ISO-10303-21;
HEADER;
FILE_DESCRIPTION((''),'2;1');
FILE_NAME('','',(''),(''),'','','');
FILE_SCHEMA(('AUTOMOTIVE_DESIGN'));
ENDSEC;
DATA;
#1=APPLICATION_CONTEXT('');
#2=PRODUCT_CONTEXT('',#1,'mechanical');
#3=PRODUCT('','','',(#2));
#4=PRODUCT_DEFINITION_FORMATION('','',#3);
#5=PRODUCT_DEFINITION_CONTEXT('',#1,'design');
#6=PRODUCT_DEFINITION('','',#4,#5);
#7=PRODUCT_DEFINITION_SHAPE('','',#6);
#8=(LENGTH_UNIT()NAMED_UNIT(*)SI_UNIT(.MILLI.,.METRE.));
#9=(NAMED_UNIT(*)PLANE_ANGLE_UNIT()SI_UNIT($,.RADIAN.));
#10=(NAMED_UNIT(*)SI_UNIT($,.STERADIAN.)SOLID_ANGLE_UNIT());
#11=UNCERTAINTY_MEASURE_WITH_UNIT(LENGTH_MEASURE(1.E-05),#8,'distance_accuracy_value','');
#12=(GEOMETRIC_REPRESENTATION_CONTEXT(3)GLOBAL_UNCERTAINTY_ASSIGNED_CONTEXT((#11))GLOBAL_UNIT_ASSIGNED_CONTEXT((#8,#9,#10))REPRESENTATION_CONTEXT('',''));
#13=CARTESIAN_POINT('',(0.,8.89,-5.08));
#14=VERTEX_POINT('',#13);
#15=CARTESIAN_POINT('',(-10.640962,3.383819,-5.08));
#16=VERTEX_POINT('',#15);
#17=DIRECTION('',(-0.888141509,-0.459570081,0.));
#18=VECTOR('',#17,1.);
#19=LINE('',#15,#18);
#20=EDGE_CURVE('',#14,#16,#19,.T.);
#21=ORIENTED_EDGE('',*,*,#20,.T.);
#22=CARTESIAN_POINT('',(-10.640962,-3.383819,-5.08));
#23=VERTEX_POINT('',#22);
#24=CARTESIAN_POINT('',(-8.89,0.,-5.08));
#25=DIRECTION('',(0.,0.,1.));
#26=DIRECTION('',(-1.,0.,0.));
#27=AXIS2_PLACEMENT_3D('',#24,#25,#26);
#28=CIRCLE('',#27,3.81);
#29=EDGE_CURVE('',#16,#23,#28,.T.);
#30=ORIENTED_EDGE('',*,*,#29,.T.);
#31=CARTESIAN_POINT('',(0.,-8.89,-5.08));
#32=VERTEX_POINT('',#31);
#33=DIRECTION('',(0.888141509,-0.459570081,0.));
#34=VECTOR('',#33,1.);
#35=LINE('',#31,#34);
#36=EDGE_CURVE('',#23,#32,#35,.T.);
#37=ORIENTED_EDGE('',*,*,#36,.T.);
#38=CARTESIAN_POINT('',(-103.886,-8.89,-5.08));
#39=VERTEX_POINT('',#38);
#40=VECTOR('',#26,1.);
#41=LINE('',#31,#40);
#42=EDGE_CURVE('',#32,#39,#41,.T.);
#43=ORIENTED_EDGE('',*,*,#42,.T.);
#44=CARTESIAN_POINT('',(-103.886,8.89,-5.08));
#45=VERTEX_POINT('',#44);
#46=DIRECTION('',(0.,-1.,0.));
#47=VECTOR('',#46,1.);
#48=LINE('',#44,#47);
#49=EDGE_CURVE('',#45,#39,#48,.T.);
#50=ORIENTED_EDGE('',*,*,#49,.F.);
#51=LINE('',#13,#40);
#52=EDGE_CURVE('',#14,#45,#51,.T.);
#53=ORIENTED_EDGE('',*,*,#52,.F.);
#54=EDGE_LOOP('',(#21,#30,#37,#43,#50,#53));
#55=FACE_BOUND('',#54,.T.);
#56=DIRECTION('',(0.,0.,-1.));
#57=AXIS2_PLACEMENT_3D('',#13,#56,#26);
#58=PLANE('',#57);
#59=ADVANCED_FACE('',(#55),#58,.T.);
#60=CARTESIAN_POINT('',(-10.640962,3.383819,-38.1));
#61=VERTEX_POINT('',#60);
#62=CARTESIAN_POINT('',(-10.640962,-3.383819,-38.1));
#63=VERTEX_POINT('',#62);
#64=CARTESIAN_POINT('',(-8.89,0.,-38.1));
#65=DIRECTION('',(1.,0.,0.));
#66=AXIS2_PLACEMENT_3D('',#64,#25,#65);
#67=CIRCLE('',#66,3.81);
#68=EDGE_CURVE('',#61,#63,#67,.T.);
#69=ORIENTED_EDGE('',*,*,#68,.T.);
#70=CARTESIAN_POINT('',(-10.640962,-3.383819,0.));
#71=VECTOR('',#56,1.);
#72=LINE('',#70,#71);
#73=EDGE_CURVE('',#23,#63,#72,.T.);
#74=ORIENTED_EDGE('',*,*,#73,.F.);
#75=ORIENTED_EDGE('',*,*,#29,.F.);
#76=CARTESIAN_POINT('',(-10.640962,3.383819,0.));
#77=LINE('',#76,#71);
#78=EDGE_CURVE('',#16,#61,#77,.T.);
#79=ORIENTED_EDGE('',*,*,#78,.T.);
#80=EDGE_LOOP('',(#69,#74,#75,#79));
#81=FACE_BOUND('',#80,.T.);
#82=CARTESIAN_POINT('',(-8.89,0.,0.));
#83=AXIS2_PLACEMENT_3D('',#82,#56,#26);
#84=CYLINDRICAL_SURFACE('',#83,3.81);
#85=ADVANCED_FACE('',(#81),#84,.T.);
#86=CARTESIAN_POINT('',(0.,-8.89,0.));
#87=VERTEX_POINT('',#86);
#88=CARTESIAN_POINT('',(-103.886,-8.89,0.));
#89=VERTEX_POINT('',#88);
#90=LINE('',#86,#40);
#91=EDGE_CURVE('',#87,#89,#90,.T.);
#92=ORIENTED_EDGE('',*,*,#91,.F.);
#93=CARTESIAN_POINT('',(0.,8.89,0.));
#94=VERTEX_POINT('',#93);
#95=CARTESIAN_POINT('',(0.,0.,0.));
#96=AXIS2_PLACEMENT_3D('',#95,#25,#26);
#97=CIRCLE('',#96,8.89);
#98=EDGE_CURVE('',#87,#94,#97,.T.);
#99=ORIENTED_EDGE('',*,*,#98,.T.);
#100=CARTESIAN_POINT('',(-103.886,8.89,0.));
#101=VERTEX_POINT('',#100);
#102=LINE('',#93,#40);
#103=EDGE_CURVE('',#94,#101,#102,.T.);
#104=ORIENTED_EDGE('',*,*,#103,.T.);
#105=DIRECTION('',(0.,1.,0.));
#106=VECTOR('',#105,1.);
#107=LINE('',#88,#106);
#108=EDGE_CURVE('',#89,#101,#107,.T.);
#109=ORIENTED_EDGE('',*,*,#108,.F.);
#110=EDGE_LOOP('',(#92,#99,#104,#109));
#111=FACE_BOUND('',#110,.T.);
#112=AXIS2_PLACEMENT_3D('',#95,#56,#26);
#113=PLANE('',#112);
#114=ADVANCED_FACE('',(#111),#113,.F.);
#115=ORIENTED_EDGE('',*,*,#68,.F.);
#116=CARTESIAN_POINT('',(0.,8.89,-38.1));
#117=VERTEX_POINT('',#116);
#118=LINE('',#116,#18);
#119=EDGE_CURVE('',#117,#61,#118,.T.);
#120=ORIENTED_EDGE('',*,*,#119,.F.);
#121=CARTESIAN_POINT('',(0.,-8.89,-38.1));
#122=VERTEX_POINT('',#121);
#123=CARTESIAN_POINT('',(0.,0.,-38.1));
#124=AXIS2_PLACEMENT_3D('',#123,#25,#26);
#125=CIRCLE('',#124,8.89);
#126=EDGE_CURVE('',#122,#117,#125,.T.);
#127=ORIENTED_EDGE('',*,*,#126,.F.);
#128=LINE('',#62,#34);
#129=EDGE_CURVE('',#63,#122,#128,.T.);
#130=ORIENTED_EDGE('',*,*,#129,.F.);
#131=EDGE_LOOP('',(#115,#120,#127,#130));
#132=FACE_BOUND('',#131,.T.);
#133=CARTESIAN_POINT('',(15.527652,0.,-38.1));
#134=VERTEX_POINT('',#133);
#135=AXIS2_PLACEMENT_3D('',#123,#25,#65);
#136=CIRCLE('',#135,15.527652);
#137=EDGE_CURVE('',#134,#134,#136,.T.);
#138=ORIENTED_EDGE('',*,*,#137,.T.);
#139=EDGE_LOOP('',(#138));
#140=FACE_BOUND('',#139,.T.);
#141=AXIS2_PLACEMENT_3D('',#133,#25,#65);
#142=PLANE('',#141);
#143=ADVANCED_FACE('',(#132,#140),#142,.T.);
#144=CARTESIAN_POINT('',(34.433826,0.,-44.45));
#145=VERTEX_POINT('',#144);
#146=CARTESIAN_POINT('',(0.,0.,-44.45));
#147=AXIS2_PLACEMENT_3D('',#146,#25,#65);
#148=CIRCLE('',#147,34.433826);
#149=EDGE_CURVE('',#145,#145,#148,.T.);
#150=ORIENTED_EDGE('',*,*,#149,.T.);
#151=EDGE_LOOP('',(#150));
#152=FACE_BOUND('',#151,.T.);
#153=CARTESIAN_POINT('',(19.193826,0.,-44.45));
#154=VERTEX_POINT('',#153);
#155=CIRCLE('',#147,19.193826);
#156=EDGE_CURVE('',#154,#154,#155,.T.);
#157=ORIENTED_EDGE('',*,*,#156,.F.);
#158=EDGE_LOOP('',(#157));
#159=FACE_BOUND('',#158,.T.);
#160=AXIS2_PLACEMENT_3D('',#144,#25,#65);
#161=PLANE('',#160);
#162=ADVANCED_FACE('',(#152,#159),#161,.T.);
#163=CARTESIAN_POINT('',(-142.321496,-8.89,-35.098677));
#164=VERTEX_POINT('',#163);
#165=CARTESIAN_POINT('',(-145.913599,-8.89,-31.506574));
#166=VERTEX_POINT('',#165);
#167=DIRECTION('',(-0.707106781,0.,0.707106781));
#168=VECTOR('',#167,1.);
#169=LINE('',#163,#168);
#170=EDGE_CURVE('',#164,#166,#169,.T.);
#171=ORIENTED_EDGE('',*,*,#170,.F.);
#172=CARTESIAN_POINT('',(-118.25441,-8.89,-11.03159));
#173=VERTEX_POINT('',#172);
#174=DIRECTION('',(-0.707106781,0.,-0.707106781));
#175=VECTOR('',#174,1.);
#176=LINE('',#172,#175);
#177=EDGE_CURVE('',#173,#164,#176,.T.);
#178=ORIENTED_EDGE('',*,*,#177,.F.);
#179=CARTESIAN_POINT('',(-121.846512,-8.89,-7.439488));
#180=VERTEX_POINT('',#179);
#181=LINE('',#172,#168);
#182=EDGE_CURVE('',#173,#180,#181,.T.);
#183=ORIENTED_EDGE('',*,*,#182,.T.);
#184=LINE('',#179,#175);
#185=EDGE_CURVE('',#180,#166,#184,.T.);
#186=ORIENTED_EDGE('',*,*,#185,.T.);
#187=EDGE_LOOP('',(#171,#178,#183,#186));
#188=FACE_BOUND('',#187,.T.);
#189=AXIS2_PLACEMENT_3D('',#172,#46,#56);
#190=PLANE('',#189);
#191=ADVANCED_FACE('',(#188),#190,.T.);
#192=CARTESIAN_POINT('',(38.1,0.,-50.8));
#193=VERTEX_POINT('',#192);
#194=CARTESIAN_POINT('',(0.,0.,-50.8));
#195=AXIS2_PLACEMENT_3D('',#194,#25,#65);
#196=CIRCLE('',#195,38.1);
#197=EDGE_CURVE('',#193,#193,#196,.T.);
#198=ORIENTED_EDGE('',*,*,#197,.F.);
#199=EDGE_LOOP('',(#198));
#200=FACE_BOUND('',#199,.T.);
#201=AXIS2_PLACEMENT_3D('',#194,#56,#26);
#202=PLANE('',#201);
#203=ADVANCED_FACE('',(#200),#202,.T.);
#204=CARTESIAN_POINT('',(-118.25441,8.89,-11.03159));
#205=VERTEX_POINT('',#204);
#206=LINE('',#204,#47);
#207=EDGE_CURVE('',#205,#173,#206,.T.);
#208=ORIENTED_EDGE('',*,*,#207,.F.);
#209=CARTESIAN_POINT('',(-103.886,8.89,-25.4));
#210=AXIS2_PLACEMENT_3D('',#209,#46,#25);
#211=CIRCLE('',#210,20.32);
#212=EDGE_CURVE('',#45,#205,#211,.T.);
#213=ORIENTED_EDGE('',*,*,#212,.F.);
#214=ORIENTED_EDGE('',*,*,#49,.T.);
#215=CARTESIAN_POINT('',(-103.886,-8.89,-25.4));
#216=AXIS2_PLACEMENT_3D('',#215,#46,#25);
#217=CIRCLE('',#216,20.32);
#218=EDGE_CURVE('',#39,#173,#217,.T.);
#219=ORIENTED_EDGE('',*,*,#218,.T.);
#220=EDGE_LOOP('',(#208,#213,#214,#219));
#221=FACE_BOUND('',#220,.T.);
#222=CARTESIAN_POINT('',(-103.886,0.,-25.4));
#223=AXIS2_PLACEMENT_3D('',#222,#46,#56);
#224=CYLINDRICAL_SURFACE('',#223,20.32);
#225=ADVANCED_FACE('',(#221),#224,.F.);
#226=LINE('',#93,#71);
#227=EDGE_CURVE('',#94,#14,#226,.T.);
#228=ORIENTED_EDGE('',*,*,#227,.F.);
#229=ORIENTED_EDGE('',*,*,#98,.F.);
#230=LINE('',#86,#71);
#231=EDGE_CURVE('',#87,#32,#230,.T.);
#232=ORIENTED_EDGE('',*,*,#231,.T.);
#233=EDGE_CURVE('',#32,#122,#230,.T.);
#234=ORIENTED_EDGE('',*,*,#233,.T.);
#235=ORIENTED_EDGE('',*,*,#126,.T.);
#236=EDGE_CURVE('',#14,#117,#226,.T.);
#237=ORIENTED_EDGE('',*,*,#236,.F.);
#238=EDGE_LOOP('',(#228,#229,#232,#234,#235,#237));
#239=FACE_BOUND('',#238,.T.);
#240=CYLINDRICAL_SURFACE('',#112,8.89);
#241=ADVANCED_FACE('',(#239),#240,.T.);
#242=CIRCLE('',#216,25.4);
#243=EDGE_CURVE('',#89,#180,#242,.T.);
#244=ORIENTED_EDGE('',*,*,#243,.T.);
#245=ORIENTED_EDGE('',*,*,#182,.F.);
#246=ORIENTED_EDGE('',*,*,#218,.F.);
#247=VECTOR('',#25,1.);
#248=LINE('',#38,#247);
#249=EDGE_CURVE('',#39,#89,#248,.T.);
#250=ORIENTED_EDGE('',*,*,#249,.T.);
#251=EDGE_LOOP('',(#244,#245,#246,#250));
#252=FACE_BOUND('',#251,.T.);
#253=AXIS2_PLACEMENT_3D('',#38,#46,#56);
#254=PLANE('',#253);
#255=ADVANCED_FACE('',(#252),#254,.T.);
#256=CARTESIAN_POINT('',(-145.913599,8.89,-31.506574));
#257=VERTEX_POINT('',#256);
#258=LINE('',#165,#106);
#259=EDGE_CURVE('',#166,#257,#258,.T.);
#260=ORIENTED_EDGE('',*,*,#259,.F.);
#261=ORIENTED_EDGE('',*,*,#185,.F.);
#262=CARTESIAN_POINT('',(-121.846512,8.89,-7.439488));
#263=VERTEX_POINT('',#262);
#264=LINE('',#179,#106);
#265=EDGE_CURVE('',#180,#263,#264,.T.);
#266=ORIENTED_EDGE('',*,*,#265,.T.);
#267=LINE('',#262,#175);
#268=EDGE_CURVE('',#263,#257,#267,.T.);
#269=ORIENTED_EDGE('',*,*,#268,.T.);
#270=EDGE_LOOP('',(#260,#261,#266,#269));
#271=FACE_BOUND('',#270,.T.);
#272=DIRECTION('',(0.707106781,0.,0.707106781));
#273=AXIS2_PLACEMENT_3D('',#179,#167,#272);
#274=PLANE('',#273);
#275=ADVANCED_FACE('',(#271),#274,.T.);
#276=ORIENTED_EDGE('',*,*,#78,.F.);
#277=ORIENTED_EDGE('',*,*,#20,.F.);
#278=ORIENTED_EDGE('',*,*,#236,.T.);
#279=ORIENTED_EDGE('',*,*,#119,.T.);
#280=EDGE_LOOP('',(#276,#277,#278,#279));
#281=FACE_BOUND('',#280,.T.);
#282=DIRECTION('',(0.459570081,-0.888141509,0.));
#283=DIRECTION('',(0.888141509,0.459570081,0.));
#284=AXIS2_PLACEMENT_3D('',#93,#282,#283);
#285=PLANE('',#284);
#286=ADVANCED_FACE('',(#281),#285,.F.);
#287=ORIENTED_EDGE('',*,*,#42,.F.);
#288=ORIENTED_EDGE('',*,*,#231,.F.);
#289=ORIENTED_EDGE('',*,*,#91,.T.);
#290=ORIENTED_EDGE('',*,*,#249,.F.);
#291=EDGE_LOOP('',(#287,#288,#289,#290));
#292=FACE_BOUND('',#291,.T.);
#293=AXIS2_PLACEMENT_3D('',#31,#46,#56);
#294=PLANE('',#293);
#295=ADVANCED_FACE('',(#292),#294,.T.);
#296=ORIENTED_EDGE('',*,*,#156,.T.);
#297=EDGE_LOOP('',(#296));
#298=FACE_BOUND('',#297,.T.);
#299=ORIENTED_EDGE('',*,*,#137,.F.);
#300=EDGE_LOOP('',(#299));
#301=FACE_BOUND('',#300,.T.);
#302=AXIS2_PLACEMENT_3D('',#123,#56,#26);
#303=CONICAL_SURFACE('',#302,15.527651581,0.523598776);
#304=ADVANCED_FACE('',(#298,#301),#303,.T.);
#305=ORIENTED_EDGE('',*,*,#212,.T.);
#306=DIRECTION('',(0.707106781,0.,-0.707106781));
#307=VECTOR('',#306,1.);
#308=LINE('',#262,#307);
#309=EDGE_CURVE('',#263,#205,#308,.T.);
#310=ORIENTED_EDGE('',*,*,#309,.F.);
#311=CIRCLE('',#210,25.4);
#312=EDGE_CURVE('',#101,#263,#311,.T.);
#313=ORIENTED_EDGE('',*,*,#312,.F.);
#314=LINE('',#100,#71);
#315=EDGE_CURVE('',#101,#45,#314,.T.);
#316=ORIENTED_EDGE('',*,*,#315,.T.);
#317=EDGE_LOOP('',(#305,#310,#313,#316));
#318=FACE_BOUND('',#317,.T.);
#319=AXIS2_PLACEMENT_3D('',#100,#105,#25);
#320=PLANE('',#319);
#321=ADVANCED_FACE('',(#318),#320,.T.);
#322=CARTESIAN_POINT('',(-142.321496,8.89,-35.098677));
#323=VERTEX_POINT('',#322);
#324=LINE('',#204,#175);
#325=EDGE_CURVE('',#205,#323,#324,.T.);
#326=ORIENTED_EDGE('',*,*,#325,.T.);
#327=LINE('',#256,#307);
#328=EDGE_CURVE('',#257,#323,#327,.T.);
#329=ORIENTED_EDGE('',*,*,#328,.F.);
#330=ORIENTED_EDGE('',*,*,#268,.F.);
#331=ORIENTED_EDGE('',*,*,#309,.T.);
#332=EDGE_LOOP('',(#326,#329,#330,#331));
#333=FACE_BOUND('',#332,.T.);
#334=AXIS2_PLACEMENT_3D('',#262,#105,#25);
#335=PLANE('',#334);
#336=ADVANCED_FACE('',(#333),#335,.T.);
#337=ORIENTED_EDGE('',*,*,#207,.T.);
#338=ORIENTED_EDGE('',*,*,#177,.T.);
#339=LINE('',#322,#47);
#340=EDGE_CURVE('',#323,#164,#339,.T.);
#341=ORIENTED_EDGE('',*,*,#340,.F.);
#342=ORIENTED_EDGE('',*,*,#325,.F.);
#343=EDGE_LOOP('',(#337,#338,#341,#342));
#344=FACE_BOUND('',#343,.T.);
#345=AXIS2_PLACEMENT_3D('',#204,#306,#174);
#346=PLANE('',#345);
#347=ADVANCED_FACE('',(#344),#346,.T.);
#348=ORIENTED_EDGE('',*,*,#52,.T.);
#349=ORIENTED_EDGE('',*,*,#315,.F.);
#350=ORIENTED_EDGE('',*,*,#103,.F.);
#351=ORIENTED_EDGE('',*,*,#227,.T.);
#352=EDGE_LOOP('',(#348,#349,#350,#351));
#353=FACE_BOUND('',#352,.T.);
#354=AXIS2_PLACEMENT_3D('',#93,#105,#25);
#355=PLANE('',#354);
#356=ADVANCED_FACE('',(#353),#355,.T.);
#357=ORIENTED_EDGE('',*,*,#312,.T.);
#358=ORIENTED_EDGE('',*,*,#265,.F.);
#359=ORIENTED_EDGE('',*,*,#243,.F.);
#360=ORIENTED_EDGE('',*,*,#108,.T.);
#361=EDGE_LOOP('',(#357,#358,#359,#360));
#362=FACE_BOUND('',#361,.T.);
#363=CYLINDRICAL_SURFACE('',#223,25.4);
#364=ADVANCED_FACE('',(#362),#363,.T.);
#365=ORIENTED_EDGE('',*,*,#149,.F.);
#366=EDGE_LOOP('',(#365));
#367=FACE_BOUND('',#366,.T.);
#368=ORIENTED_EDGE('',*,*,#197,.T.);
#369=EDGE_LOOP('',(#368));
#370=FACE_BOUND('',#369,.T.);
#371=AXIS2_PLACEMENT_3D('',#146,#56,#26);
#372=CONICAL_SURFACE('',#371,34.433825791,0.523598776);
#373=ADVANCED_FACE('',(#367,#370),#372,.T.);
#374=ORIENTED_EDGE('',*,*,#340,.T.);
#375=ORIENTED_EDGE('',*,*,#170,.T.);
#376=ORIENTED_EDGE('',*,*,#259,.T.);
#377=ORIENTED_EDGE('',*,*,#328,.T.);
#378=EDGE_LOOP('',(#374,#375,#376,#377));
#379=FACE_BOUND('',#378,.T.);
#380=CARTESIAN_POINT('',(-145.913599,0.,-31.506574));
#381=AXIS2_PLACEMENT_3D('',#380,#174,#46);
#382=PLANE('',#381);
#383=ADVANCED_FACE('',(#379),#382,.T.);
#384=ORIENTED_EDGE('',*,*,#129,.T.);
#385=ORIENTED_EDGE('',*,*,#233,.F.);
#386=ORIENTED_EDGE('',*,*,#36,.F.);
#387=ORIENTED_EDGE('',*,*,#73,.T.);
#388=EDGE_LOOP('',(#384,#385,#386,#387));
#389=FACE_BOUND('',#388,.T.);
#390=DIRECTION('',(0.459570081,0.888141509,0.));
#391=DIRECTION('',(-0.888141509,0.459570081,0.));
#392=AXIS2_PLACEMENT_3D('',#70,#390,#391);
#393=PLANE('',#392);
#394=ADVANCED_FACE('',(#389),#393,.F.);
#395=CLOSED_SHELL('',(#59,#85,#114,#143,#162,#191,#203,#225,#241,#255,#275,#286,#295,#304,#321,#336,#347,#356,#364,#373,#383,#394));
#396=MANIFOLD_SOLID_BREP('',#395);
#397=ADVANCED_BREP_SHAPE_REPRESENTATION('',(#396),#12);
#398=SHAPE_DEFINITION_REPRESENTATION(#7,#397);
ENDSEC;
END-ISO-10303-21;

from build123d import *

# Parameters (mm, degrees)
BOSS_EXTRUDE1_DEPTH = 38.1
CUT_EXTRUDE1_START  = -5.08
CUT_EXTRUDE1_DEPTH  = 5.08
SWEEP1_START        = -8.89
SWEEP1_DEPTH        = 17.78


# Read off the part's stored shape, not the designer's step: Sweep1
with BuildPart() as part:
    # Sketch2 → Revolve1 (revolve)
    with BuildSketch(Plane(origin=(0, 0, 0), x_dir=(1, 0, 0), z_dir=(0, 1, 0))):
        Polygon((0, 50.8), (38.1, 50.8), (34.433825791, 44.45), (19.193825791, 44.45), (15.527651581, 38.1), (0, 38.1), align=None)
    revolve(axis=Axis((0, 0, 0), (0, 0, -1)))

    # Sketch3 → Boss-Extrude1 (add)
    with BuildSketch(Plane.XY.offset(-38.1)):
        with BuildLine():
            Line((0, 8.89), (-10.640962008, 3.383819151))
            ThreePointArc((-10.640962008, 3.383819151), (-12.7, 0), (-10.640962008, -3.383819151))
            Line((-10.640962008, -3.383819151), (0, -8.89))
            ThreePointArc((0, -8.89), (8.89, 0), (0, 8.89))
        make_face()
    extrude(amount=BOSS_EXTRUDE1_DEPTH)

    # Sketch4 → Cut-Extrude1 (cut)
    with BuildSketch(Plane.XY.offset(CUT_EXTRUDE1_START)):
        with BuildLine():
            Line((0, 8.89), (0, -8.89))
            Line((0, -8.89), (-10.640962008, -3.383819151))
            ThreePointArc((-10.640962008, -3.383819151), (-12.7, 0), (-10.640962008, 3.383819151))
            Line((-10.640962008, 3.383819151), (0, 8.89))
        make_face()
    extrude(amount=CUT_EXTRUDE1_DEPTH, mode=Mode.SUBTRACT)

    # Sweep1 outline → Sweep1 (add)
    with BuildSketch(Plane(origin=(0, 0, 0), x_dir=(1, 0, 0), z_dir=(0, 1, 0)).offset(SWEEP1_START)):
        with BuildLine():
            Line((-103.886, 0), (0, 0))
            Line((0, 0), (0, 5.08))
            Line((0, 5.08), (-103.886, 5.08))
            ThreePointArc((-103.886, 5.08), (-111.662127346, 6.626767899), (-118.254409794, 11.031590206))
            Line((-118.254409794, 11.031590206), (-142.321496198, 35.098676611))
            Line((-142.321496198, 35.098676611), (-145.913598647, 31.506574162))
            Line((-145.913598647, 31.506574162), (-121.846512242, 7.439487758))
            ThreePointArc((-121.846512242, 7.439487758), (-113.606159182, 1.933459874), (-103.886, 0))
        make_face()
    extrude(amount=SWEEP1_DEPTH)


solid = part.part
